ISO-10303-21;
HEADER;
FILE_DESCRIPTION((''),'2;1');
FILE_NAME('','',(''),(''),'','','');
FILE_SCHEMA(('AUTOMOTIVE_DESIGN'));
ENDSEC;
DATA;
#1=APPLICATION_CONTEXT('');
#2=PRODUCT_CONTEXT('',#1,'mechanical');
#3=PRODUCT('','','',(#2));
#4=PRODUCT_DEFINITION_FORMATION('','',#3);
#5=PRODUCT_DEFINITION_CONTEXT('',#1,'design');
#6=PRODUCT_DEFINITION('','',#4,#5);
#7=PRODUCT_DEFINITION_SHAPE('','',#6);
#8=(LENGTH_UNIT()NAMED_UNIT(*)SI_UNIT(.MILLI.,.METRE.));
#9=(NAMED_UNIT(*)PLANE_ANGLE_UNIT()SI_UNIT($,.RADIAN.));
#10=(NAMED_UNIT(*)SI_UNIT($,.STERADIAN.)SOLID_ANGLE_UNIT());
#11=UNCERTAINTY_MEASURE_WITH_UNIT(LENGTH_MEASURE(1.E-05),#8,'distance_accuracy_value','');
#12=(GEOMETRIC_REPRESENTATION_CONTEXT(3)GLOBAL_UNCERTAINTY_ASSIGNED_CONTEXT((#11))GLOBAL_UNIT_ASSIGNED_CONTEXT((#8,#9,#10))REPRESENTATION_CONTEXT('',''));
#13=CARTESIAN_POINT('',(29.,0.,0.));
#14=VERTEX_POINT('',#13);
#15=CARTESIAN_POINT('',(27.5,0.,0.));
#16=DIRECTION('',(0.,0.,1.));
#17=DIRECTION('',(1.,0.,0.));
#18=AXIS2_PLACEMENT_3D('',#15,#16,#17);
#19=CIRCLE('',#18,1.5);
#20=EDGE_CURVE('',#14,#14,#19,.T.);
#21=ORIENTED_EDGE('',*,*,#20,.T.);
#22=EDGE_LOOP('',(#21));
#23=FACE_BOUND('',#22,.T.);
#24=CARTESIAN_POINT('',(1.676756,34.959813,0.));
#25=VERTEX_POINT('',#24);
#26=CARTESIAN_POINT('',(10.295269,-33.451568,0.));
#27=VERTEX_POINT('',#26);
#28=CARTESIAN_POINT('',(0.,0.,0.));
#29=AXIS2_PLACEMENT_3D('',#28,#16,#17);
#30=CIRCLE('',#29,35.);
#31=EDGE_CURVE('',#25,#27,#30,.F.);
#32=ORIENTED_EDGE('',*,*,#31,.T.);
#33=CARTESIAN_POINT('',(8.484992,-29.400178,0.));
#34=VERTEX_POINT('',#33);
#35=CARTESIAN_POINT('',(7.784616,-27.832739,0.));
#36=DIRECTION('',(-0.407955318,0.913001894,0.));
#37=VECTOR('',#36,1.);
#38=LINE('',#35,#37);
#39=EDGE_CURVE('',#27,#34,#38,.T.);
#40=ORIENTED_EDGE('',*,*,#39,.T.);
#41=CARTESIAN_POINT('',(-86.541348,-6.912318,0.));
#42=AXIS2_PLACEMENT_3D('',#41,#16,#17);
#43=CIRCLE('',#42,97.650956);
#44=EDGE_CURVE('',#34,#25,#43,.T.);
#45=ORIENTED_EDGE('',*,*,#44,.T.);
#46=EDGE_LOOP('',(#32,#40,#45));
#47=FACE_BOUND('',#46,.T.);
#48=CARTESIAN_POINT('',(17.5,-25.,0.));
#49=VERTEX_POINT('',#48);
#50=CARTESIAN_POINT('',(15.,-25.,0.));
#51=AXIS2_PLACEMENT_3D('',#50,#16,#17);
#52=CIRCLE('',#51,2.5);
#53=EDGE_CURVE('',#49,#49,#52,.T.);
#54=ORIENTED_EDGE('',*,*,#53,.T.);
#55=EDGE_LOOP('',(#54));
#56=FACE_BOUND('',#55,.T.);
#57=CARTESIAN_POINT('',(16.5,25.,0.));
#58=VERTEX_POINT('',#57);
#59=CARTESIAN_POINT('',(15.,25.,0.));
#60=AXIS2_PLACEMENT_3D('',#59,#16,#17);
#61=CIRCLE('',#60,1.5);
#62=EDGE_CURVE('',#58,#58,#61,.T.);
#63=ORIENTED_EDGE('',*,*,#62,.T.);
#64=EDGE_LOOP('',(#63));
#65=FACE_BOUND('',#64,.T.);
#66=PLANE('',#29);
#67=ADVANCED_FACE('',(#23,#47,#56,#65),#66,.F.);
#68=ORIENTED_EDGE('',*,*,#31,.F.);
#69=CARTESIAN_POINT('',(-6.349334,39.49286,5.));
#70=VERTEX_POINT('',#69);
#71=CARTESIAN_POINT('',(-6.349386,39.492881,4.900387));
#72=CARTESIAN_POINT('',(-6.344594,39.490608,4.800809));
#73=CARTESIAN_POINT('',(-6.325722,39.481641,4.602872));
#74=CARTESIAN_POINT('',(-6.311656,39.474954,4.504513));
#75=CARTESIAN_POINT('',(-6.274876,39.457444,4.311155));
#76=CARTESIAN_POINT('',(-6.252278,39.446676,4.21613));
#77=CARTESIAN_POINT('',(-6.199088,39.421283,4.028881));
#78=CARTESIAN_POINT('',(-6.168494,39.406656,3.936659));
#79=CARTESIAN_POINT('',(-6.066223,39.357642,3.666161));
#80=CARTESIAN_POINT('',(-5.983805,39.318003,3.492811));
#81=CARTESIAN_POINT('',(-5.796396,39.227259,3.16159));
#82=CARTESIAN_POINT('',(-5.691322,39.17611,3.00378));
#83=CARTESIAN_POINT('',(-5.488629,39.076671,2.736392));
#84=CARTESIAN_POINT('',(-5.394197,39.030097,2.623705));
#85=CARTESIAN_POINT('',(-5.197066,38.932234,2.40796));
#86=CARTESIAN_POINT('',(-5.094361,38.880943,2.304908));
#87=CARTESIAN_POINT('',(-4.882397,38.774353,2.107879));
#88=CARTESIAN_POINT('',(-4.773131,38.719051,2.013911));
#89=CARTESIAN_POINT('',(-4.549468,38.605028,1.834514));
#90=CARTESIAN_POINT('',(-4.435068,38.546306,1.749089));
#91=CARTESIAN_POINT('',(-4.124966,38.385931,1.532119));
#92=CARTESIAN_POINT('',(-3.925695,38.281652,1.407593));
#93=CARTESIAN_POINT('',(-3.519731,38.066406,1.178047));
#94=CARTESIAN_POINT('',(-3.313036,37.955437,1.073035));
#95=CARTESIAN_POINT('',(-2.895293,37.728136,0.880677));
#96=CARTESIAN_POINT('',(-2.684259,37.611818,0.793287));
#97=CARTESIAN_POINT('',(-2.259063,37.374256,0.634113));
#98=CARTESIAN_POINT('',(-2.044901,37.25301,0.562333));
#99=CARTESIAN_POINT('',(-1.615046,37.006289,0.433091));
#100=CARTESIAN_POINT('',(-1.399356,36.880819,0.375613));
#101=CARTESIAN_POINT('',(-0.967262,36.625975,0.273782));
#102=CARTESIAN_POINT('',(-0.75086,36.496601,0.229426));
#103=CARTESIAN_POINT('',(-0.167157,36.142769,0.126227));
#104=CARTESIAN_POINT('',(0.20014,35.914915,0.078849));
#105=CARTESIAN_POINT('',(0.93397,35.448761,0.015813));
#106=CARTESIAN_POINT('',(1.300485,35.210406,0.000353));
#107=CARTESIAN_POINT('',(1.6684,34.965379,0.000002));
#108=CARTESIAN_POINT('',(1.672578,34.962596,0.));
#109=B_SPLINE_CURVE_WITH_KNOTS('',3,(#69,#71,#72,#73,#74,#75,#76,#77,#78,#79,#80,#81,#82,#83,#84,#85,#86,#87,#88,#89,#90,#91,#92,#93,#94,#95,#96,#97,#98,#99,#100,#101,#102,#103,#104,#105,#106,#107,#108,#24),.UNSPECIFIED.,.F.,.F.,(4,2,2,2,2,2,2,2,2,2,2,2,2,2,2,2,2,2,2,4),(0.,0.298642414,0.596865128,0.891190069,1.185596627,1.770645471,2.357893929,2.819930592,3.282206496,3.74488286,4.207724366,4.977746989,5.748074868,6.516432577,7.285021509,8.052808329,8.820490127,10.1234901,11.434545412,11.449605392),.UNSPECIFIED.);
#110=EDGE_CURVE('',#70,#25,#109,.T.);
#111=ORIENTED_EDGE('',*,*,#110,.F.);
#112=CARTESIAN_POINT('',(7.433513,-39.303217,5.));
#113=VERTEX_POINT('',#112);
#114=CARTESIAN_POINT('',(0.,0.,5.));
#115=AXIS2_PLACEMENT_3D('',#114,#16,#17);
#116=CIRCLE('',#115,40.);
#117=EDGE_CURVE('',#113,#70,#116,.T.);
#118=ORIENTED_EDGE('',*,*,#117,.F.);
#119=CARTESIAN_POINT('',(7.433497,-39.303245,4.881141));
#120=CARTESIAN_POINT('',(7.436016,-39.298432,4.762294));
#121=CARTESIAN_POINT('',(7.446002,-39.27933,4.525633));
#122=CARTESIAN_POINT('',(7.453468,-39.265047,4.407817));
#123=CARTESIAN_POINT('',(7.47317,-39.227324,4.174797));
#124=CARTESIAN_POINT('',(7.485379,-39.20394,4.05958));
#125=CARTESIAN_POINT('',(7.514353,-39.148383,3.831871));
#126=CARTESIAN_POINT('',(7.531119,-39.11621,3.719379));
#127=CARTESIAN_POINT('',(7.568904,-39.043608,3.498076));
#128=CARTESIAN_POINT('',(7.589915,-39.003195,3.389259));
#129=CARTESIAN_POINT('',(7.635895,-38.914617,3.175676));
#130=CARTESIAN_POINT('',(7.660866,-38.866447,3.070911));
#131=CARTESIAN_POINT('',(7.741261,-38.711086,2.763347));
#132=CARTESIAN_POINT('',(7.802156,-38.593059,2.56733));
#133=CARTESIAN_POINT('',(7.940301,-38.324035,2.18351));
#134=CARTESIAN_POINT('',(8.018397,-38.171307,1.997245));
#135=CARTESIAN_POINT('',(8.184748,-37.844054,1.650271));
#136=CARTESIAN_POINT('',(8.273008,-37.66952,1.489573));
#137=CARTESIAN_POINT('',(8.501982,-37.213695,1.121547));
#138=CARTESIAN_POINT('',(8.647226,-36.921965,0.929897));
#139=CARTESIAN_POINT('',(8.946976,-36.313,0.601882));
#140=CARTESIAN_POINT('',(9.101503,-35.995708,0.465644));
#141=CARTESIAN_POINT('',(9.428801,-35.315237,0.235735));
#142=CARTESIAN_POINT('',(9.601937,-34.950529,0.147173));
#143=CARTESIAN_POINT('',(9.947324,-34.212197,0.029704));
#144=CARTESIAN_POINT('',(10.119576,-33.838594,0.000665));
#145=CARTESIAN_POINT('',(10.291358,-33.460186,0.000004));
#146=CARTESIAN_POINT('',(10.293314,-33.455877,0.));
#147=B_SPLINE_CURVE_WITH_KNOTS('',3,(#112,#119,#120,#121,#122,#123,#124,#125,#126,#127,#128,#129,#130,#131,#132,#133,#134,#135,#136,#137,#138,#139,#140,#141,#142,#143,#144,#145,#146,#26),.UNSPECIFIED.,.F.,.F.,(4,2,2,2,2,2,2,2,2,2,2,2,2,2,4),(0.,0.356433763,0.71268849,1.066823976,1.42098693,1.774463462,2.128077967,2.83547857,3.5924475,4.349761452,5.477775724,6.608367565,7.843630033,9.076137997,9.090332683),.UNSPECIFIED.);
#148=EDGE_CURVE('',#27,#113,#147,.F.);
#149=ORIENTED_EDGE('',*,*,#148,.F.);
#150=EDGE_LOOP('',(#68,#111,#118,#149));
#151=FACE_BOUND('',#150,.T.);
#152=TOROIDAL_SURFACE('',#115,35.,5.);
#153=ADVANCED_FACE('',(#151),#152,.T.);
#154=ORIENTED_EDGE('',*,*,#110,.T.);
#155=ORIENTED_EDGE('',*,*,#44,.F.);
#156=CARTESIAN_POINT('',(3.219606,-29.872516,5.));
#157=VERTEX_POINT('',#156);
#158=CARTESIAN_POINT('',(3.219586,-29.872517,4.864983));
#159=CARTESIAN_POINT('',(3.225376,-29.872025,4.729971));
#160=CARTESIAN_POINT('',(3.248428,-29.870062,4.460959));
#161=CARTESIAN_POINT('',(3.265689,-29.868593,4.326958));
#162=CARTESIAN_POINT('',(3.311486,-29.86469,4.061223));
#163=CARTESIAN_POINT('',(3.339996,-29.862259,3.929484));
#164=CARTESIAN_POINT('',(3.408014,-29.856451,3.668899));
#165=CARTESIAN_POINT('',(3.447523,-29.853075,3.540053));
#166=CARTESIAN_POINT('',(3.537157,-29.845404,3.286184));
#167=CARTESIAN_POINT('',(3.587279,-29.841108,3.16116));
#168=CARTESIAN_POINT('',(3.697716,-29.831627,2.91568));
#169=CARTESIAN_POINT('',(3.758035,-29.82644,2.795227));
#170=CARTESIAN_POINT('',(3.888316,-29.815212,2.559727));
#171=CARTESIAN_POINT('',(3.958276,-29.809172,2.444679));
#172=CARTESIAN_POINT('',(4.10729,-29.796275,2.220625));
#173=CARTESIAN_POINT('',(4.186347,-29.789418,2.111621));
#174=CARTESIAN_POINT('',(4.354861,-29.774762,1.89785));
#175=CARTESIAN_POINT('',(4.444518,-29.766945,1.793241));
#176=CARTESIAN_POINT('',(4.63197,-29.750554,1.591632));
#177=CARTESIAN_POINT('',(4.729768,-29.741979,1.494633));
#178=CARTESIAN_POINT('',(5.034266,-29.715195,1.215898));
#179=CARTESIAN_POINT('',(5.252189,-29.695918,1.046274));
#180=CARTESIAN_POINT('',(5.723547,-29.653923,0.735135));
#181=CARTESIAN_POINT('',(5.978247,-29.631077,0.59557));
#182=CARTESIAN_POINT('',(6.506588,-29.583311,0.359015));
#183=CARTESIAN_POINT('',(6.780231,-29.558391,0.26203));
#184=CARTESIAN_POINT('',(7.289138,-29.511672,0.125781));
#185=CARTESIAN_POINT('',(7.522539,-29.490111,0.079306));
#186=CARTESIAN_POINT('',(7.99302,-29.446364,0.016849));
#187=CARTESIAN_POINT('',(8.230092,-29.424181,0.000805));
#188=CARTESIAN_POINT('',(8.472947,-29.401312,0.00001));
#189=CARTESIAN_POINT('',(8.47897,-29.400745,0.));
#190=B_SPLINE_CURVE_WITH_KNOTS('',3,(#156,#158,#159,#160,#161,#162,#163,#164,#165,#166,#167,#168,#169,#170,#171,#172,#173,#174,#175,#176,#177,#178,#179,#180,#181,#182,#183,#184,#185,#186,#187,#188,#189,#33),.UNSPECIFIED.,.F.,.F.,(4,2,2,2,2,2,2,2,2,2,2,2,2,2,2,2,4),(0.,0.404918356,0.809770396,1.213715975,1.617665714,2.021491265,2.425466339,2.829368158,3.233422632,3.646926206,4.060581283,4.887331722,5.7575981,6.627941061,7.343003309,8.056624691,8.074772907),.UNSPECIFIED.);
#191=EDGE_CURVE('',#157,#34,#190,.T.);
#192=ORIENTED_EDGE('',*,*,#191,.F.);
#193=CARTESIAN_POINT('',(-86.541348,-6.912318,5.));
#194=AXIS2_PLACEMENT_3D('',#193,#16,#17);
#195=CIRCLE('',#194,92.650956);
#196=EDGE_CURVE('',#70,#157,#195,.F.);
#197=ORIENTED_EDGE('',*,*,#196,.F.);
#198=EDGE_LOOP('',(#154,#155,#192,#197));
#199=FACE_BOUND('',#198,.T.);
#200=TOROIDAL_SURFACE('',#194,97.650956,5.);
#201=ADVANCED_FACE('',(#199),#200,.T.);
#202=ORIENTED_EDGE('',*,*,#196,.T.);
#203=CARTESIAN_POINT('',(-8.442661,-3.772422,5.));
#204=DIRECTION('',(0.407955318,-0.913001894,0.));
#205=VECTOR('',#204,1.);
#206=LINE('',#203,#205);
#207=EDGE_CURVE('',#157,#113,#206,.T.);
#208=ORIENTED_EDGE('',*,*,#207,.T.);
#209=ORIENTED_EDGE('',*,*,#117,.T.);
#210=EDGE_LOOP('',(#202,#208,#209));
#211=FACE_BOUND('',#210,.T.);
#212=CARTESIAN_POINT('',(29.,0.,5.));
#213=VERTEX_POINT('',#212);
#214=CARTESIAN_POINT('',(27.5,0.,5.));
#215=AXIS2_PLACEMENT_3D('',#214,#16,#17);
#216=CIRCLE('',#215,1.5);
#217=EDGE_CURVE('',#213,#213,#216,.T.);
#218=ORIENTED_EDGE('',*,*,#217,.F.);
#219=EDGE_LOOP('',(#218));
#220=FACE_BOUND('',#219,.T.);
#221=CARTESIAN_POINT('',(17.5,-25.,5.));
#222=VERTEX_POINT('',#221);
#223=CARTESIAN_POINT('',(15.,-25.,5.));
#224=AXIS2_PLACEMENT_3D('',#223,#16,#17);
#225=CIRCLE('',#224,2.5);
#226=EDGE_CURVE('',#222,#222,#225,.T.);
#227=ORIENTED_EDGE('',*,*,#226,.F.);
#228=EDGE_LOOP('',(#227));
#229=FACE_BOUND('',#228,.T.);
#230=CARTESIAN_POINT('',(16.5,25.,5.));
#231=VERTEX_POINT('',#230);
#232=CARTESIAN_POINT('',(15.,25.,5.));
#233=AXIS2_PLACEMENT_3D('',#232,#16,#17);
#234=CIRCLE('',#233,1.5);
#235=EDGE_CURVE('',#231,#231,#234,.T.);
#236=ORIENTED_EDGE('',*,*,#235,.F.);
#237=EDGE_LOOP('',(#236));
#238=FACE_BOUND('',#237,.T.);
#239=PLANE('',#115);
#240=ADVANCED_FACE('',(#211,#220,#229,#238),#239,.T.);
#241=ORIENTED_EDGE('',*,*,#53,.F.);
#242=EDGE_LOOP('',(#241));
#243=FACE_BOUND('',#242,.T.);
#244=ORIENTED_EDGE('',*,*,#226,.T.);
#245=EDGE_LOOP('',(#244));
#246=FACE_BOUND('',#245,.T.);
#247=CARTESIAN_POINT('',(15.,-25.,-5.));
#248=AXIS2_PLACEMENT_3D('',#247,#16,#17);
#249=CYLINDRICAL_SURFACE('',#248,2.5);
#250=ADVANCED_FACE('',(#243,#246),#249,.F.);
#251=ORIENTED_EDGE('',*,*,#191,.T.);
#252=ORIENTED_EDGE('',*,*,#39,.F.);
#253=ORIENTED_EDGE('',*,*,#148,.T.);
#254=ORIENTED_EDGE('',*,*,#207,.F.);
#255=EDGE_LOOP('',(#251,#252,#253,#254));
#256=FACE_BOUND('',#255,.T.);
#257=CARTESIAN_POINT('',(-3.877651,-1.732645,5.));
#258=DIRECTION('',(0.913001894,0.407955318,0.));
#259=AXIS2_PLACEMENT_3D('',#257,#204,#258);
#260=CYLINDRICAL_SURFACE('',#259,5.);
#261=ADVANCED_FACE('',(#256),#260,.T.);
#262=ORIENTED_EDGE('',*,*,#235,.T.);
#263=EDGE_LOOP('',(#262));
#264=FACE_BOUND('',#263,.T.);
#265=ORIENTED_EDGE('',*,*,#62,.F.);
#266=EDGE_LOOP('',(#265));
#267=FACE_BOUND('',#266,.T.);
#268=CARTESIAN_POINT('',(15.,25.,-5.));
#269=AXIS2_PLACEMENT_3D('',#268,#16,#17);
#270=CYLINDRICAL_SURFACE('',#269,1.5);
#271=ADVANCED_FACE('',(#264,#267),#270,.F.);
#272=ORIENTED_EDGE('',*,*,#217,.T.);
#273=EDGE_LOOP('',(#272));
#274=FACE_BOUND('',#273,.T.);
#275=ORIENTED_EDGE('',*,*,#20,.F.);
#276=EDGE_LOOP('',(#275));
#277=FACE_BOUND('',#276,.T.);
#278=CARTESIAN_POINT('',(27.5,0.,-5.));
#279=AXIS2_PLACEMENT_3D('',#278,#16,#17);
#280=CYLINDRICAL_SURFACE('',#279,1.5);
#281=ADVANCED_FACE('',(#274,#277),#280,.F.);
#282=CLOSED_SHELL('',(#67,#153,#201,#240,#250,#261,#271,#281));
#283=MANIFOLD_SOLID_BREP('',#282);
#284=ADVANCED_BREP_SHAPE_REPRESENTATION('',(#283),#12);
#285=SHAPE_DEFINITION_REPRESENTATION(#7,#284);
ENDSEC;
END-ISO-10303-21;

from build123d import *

# Parameters (mm, degrees)
BOSS_EXTRUDE1_DEPTH = 5
SKETCH2_R           = 2.5
SKETCH2_R_2         = 1.5
CUT_EXTRUDE1_DEPTH  = 10
FILLET2_R           = 5


# Some blends are built 0.0001 mm under size
with BuildPart() as part:
    # Sketch1 → Boss-Extrude1 (new body)
    with BuildSketch(Plane.XY):
        with BuildLine():
            ThreePointArc((0, -40), (28.284271247, -28.284271247), (40, 0))
            ThreePointArc((40, 0), (25.942500138, 30.446456059), (-6.349334329, 39.492859526))
            ThreePointArc((-6.349334329, 39.492859526), (5.815471714, 0.464499257), (0, -40))
        make_face()
    extrude(amount=BOSS_EXTRUDE1_DEPTH)

    # Sketch2 → Cut-Extrude1 (cut)
    with BuildSketch(Plane.XY.offset(5)):
        with Locations((15, -25)):
            Circle(SKETCH2_R)
        with Locations((27.5, 0)):
            Circle(SKETCH2_R_2)
        with Locations((15, 25)):
            Circle(SKETCH2_R_2)
    extrude(amount=-CUT_EXTRUDE1_DEPTH, mode=Mode.SUBTRACT)

    # Chamfer1
    # the kernel refuses this chamfer: 10, 7.744855577 mm, written as the material it takes off along each edge
    with BuildSketch(Plane(origin=(0, -40, -27.321942893), x_dir=(0.9956355834600147, 0.09332622861894702, 0), z_dir=(0, 0, 1))) as chamfer1_piece_1:
        with BuildLine():
            Line((7.46609829, 0), (4.150714585, 9.782810082))
            ThreePointArc((4.150714585, 9.782810082), (2.27411481, 4.969757663), (0, 0))
            ThreePointArc((0, 0), (3.797218814, -0.17452519), (7.46609829, 0))
        make_face()
    extrude(amount=59.643885786, mode=Mode.SUBTRACT)

    # Fillet2
    fillet2_edges = [part.edges().sort_by_distance(p)[0] for p in [
        (5.326559747, -34.587866421, 0),
        (5.24041299, 5.748958646, 0),
        (39.401767574, 6.892076033, 0),
    ]]
    fillet(fillet2_edges, radius=FILLET2_R - 0.0001)  # a hair under: the kernel refuses the full size


solid = part.part
